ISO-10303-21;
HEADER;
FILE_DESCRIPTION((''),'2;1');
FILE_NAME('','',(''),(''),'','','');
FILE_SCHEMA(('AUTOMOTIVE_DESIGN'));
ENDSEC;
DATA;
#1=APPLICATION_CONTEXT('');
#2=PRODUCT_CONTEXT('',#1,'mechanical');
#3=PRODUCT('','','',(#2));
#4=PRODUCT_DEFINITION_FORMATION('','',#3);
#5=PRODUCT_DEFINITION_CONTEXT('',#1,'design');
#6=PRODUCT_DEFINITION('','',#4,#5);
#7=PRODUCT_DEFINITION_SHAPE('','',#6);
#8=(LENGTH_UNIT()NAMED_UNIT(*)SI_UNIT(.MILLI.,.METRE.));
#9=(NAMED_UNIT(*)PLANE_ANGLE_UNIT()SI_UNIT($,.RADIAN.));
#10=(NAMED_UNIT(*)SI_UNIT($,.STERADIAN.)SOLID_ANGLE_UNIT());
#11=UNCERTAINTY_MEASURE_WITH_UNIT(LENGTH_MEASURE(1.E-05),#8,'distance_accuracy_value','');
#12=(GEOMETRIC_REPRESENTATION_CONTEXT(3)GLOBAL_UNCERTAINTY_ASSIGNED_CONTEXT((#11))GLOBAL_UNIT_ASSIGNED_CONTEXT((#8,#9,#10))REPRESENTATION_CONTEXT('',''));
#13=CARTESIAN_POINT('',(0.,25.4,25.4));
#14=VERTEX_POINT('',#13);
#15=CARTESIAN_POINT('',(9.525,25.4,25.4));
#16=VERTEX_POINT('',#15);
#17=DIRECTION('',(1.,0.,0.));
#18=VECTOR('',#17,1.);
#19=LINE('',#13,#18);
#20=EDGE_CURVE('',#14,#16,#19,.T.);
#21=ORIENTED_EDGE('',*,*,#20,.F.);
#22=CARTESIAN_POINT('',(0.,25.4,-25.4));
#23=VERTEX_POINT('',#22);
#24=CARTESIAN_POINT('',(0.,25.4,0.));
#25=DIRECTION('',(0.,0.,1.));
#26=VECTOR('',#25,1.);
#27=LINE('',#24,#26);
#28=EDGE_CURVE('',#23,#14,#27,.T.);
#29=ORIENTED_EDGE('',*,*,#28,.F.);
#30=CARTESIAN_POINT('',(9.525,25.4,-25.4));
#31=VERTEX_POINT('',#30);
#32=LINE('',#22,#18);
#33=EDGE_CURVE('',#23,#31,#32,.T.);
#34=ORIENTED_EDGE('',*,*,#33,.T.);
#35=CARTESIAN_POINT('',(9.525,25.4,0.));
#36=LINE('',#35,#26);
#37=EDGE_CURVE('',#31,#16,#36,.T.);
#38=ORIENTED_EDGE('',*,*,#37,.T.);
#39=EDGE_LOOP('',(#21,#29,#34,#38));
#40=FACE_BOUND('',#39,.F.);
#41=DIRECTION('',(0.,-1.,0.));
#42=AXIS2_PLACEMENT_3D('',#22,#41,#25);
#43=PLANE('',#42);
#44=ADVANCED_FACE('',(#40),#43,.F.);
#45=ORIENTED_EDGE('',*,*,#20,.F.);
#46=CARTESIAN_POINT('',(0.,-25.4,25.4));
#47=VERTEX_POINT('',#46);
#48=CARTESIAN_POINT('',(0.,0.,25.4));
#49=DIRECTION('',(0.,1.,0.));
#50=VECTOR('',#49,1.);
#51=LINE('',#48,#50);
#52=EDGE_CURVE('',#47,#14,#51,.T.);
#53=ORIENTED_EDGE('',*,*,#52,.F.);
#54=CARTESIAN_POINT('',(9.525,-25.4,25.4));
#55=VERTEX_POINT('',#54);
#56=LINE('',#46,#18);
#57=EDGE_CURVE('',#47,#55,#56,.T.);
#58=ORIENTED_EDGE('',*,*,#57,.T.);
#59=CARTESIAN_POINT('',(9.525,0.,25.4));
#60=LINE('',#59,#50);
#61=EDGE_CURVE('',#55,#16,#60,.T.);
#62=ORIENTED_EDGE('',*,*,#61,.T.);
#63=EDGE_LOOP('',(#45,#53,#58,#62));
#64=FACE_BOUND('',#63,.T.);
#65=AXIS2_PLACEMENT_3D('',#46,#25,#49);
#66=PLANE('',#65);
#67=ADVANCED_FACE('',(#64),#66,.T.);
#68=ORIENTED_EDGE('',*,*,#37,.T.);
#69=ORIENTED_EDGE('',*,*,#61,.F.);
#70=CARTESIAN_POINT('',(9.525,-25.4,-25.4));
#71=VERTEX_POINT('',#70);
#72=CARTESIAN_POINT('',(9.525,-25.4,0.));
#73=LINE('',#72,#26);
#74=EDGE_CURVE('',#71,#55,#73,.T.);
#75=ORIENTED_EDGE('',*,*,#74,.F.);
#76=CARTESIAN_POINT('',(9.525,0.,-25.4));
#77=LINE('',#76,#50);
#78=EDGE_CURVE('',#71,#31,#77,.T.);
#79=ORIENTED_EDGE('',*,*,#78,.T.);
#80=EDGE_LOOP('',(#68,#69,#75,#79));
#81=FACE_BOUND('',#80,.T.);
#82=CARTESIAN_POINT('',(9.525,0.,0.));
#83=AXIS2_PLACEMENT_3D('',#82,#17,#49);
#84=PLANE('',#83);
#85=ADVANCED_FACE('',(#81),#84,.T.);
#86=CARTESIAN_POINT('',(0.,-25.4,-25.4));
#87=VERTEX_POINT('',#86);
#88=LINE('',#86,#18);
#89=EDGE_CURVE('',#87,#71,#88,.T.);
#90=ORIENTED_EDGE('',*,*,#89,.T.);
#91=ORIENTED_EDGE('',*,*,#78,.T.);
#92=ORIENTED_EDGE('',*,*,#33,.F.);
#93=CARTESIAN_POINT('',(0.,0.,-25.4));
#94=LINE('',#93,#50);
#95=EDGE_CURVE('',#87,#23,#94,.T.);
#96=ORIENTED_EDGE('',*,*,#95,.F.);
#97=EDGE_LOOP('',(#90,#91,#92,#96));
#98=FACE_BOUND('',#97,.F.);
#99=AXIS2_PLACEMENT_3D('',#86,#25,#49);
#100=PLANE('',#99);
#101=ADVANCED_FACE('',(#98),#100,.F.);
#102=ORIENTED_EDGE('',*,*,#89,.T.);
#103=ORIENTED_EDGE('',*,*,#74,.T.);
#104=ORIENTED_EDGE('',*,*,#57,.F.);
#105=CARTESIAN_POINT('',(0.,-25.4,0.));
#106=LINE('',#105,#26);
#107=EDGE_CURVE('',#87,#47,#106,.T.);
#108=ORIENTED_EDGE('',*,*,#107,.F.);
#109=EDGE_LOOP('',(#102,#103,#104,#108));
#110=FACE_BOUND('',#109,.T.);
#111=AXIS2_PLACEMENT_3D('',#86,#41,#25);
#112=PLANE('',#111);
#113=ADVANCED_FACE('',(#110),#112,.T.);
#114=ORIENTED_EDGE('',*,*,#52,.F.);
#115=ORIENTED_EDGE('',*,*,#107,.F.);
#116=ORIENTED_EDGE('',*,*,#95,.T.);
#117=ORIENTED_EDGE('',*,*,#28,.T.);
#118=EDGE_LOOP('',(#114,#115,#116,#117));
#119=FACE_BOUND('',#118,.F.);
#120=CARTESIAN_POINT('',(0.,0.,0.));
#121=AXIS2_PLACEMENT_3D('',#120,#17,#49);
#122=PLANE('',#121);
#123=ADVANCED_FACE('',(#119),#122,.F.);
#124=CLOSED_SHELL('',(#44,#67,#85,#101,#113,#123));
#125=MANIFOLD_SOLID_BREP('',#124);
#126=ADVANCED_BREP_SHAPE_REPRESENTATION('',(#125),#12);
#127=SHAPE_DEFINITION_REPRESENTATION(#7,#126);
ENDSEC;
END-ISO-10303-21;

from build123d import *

# Parameters (mm, degrees)
F0_W     = 50.8
F0_H     = 50.8
F1_DEPTH = 9.525


# Not quite as in the source:
# - a length typed as a fraction of an inch, garbled in the dataset ("3 / 203.2 mm" for 3/8 in), is restored


with BuildPart() as f1:
    # F0 (on Right) → F1 (new body)
    with BuildSketch(Plane.YZ):
        Rectangle(F0_W, F0_H)
    extrude(amount=F1_DEPTH)


solid = f1.part
